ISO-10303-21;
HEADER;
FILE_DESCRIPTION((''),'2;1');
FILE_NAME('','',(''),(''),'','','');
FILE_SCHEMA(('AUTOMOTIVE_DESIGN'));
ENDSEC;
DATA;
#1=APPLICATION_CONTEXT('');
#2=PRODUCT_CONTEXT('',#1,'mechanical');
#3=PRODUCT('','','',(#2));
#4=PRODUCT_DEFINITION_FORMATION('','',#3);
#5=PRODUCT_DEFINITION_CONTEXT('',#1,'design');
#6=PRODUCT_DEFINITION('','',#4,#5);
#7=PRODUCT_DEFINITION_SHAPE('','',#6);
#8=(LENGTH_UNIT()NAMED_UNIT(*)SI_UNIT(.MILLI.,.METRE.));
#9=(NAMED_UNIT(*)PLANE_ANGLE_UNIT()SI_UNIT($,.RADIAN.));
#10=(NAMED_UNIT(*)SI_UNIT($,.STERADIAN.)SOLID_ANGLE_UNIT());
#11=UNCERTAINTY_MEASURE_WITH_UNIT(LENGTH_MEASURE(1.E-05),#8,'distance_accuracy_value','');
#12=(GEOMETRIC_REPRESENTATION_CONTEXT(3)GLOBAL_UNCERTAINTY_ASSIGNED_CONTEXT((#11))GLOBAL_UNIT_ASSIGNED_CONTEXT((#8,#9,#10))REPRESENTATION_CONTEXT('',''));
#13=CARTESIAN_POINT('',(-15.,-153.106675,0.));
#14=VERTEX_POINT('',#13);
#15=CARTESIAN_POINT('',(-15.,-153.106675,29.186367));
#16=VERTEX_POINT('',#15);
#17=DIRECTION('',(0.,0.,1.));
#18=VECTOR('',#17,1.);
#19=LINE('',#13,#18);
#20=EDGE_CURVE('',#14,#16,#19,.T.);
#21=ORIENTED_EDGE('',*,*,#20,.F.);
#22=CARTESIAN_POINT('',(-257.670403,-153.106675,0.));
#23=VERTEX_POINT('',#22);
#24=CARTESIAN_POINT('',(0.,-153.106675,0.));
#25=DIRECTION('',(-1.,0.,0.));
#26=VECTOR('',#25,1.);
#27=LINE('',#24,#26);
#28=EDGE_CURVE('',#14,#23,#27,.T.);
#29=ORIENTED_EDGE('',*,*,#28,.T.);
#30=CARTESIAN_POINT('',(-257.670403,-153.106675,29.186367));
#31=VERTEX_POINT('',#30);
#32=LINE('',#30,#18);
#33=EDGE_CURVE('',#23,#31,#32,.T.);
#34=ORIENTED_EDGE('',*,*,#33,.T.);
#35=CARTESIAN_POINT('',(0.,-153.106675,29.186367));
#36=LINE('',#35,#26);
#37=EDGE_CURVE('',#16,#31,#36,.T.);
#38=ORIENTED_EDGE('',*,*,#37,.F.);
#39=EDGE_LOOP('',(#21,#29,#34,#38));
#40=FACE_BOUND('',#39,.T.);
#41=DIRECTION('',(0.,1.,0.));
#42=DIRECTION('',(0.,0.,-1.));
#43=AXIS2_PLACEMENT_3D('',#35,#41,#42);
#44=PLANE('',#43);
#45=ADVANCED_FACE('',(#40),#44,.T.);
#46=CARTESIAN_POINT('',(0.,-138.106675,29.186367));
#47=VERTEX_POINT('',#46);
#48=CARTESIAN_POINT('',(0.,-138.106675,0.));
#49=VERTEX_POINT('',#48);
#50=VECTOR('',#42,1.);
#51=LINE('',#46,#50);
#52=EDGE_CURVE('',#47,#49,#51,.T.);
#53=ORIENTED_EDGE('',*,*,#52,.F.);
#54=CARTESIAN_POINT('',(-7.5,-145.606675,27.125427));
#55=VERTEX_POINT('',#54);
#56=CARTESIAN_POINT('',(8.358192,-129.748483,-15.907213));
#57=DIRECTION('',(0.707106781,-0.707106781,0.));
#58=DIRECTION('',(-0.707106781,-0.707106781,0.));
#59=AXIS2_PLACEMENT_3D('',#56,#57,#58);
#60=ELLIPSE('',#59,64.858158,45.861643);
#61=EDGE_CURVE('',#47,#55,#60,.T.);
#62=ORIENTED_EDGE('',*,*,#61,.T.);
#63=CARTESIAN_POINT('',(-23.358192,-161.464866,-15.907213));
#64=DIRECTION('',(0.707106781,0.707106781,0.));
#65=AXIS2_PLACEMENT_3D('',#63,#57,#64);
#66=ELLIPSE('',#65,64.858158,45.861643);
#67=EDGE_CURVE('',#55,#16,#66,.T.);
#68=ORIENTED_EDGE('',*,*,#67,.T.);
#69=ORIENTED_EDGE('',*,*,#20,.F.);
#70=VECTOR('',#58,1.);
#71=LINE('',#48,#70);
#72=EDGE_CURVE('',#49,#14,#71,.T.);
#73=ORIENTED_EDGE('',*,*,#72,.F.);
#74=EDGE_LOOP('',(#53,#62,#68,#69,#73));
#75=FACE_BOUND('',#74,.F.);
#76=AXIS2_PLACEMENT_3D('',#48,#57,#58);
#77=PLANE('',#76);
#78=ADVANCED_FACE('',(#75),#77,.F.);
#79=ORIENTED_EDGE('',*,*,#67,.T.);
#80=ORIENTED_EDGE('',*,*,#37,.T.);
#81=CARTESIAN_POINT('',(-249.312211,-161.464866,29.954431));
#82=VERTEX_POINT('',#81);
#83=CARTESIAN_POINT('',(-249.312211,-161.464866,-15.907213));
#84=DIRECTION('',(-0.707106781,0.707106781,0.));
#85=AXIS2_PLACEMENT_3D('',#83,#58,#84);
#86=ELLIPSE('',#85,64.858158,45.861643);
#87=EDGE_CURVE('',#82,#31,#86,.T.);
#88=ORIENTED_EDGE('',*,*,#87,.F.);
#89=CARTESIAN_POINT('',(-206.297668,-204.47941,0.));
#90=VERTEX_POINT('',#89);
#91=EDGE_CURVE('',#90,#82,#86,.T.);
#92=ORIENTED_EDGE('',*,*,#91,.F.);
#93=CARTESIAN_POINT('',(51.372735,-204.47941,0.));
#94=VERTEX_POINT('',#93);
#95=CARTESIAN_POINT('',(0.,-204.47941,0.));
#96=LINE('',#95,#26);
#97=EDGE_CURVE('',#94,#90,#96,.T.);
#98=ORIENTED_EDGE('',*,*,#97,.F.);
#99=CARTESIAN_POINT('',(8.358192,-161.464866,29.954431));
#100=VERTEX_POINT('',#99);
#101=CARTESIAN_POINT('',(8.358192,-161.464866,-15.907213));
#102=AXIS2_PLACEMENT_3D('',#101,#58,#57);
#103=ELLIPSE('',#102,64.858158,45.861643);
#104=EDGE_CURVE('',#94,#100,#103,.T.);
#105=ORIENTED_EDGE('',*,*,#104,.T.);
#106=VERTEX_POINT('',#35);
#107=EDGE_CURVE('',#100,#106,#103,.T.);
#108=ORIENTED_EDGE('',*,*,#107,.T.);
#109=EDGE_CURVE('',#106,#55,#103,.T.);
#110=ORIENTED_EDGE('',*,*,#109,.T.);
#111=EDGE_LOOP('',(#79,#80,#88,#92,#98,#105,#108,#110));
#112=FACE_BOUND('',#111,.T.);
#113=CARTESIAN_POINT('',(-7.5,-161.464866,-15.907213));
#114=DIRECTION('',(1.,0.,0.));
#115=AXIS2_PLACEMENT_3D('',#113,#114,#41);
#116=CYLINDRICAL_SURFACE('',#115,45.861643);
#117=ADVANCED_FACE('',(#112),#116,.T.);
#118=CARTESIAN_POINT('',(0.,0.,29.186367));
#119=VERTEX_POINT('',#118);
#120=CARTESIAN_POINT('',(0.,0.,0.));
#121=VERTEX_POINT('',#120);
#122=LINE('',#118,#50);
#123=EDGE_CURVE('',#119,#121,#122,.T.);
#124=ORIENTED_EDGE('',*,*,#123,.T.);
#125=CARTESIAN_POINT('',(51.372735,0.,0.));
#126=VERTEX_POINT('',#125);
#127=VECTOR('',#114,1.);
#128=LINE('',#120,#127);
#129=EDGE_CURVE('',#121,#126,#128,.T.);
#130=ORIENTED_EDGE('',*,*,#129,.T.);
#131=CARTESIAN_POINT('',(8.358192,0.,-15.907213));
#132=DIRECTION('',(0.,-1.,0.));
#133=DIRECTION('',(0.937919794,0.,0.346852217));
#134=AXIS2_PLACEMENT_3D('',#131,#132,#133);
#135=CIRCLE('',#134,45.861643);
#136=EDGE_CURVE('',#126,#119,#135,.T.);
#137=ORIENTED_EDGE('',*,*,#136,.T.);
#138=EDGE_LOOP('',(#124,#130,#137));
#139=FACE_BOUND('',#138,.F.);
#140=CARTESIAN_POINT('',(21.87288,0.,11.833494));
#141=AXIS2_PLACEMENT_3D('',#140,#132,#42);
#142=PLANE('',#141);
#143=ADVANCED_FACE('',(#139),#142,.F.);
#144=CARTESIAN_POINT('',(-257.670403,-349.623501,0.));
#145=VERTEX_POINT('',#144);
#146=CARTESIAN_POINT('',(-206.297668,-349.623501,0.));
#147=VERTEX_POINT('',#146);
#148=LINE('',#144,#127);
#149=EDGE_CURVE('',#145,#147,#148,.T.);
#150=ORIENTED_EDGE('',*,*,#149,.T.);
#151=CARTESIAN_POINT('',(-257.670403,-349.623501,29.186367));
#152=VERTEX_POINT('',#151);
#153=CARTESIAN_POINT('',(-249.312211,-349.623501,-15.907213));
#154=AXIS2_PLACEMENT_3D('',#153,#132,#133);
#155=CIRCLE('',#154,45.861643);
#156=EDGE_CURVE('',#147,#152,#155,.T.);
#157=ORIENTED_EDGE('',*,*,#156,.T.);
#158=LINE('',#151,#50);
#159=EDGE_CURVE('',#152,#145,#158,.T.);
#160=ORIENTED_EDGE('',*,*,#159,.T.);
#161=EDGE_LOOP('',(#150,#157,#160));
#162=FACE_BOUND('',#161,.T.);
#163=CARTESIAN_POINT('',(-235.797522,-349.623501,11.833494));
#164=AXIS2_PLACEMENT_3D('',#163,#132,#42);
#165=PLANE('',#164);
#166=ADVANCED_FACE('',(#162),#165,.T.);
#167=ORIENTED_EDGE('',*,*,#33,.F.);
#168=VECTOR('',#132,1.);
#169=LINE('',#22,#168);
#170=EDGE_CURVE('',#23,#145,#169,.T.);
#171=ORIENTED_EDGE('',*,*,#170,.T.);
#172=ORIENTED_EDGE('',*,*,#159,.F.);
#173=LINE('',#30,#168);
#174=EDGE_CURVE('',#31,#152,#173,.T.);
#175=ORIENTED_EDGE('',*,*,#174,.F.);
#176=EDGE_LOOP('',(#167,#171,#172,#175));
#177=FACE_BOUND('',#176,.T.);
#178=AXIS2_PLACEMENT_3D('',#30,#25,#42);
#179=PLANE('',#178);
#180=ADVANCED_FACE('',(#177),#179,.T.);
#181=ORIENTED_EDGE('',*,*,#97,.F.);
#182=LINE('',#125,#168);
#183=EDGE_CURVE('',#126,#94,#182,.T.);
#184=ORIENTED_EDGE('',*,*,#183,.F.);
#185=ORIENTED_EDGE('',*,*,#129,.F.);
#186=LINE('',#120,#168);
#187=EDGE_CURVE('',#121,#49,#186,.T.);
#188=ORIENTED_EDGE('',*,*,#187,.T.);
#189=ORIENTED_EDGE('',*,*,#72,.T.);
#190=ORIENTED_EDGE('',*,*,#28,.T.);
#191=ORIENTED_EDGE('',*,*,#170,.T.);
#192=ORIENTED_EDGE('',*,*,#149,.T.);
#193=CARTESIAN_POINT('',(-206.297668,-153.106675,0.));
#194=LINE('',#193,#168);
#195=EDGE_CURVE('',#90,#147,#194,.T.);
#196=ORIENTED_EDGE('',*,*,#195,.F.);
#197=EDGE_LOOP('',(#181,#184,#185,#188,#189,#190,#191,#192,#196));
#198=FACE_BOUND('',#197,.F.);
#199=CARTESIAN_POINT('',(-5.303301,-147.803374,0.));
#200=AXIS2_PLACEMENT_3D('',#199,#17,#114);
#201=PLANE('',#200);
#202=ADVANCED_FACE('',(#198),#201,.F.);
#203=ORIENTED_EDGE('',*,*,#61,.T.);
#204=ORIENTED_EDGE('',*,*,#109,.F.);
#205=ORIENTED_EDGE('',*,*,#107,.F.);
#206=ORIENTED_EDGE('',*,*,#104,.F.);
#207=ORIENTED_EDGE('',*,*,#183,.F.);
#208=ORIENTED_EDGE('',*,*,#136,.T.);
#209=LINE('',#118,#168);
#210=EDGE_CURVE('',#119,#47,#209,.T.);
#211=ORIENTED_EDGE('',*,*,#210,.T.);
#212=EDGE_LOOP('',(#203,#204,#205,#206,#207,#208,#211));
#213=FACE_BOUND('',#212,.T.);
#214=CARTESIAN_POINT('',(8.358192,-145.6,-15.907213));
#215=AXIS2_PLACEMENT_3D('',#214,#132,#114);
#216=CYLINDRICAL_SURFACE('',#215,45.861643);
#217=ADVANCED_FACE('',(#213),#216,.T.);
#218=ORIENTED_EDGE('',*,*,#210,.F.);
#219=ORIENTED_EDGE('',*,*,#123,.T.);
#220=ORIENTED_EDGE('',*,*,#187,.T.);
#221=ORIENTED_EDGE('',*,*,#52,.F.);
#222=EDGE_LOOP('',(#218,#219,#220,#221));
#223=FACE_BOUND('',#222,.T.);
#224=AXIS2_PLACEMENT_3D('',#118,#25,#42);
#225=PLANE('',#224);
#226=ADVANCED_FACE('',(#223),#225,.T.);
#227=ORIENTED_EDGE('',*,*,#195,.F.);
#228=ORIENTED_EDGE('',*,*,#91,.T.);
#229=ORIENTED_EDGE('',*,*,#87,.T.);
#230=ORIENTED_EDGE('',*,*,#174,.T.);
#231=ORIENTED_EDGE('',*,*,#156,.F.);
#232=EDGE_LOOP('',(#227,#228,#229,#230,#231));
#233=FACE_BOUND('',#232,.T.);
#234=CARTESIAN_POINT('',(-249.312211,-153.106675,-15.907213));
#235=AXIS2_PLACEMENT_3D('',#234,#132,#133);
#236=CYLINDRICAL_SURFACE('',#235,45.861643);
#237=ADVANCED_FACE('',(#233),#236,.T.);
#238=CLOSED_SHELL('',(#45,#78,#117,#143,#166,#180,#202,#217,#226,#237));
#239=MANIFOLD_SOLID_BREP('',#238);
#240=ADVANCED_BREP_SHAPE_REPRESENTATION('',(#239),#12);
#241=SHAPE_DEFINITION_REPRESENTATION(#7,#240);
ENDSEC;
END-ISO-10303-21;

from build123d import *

# Parameters (mm, degrees)
F3_T4_DEPTH  = 67.761612304
F3_S5_R      = 45.861643493
F3_T6_DEPTH  = 37
F3_S7_R      = 45.861643493
F3_T8_DEPTH  = 37
F3_T12_DEPTH = 67.761612304
F3_S13_R     = 45.861643493
F3_T14_DEPTH = 37
F3_S15_R     = 45.861643493
F3_T16_DEPTH = 37
F3_T20_DEPTH = 67.761612304
F3_S21_R     = 45.861643493
F3_T22_DEPTH = 37
F3_S23_R     = 45.861643493
F3_T24_DEPTH = 37


# Not quite as in the source:
# - a fillet or chamfer that OpenCascade refuses, or shapes differently, is made with other operations: its cross-section is extruded or revolved along the edge and cut away or added


with BuildPart() as f2:
    # F2: sweep along a path in F1
    with BuildLine(Plane.XY) as f2_path:
        Line((0, 0), (0, -153.106674552))
        Line((0, -153.106674552), (-257.6704025269, -153.106674552))
        Line((-257.6704025269, -153.106674552), (-257.6704025269, -349.6235013008))
    # F0 (on Front) → F2 (sweep)
    with BuildSketch(Plane.XZ):
        with BuildLine():
            Line((0, 0), (44.372734969, 0))
            add(Edge.make_bspline(
                [(44.372734969, 0), (44.372734969, 22.1863674845), (0, 22.1863674845)],
                knots=[3.1415926536, 3.1415926536, 3.1415926536, 4.7123889804, 4.7123889804, 4.7123889804], degree=2, weights=[1, 0.7071067812, 1]))
            Line((0, 22.1863674845), (0, 0))
        make_face()
        with BuildLine():
            add(Edge.make_bspline(
                [(44.372734969, 0), (44.372734969, 22.1863674845), (0, 22.1863674845)],
                knots=[3.1415926536, 3.1415926536, 3.1415926536, 4.7123889804, 4.7123889804, 4.7123889804], degree=2, weights=[1, 0.7071067812, 1]))
            Line((44.372734969, 0), (51.372734969, 0))
            ThreePointArc((51.372734969, 0), (31.0126987208, 23.9683895846), (0, 29.1863674845))
            Line((0, 29.1863674845), (0, 22.1863674845))
        make_face()
    sweep(path=f2_path.line, transition=Transition.RIGHT)

    # F3: chamfer of 15 on 1 edges, made by hand


with BuildPart() as f3_tool2:
    # F3_s3 → F3_t4 (new body)
    with BuildSketch(Plane.XY):
        Polygon((0, -138.106674552), (-15, -153.106674552), (0, -153.106674552), align=None)
    extrude(amount=F3_T4_DEPTH)

    # F3_s5 → F3_t6 (intersect, symmetric)
    with BuildSketch(Plane.XZ.offset(145.6)):
        with Locations((8.3581917564, -15.9072127065)):
            Circle(F3_S5_R)
    extrude(amount=F3_T6_DEPTH, both=True, mode=Mode.INTERSECT)

    # F3_s7 → F3_t8 (intersect, symmetric)
    with BuildSketch(Plane.YZ.offset(-7.5)):
        with Locations((-161.4648663084, -15.9072127065)):
            Circle(F3_S7_R)
    extrude(amount=F3_T8_DEPTH, both=True, mode=Mode.INTERSECT)


with BuildPart() as f2_1:
    add(f2.part)

    # F3_t1: union F3_tool2
    add(f3_tool2.part)


with BuildPart() as f3_tool10:
    # F3_s11 → F3_t12 (new body)
    with BuildSketch(Plane.XY):
        Polygon((0, -138.106674552), (-15, -153.106674552), (0, -153.106674552), align=None)
    extrude(amount=F3_T12_DEPTH)

    # F3_s13 → F3_t14 (cut, symmetric)
    with BuildSketch(Plane.XZ.offset(145.6)):
        with Locations((8.3581917564, -15.9072127065)):
            Circle(F3_S13_R)
    extrude(amount=F3_T14_DEPTH, both=True, mode=Mode.SUBTRACT)

    # F3_s15 → F3_t16 (intersect, symmetric)
    with BuildSketch(Plane.YZ.offset(-7.5)):
        with Locations((-161.4648663084, -15.9072127065)):
            Circle(F3_S15_R)
    extrude(amount=F3_T16_DEPTH, both=True, mode=Mode.INTERSECT)


with BuildPart() as f2_2:
    add(f2_1.part)

    # F3_t9: union F3_tool10
    add(f3_tool10.part)


with BuildPart() as f3_tool18:
    # F3_s19 → F3_t20 (new body)
    with BuildSketch(Plane.XY):
        Polygon((0, -138.106674552), (-15, -153.106674552), (0, -153.106674552), align=None)
    extrude(amount=F3_T20_DEPTH)

    # F3_s21 → F3_t22 (intersect, symmetric)
    with BuildSketch(Plane.XZ.offset(145.6)):
        with Locations((8.3581917564, -15.9072127065)):
            Circle(F3_S21_R)
    extrude(amount=F3_T22_DEPTH, both=True, mode=Mode.INTERSECT)

    # F3_s23 → F3_t24 (cut, symmetric)
    with BuildSketch(Plane.YZ.offset(-7.5)):
        with Locations((-161.4648663084, -15.9072127065)):
            Circle(F3_S23_R)
    extrude(amount=F3_T24_DEPTH, both=True, mode=Mode.SUBTRACT)


with BuildPart() as f2_3:
    add(f2_2.part)

    # F3_t17: union F3_tool18
    add(f3_tool18.part)


solid = f2_3.part
